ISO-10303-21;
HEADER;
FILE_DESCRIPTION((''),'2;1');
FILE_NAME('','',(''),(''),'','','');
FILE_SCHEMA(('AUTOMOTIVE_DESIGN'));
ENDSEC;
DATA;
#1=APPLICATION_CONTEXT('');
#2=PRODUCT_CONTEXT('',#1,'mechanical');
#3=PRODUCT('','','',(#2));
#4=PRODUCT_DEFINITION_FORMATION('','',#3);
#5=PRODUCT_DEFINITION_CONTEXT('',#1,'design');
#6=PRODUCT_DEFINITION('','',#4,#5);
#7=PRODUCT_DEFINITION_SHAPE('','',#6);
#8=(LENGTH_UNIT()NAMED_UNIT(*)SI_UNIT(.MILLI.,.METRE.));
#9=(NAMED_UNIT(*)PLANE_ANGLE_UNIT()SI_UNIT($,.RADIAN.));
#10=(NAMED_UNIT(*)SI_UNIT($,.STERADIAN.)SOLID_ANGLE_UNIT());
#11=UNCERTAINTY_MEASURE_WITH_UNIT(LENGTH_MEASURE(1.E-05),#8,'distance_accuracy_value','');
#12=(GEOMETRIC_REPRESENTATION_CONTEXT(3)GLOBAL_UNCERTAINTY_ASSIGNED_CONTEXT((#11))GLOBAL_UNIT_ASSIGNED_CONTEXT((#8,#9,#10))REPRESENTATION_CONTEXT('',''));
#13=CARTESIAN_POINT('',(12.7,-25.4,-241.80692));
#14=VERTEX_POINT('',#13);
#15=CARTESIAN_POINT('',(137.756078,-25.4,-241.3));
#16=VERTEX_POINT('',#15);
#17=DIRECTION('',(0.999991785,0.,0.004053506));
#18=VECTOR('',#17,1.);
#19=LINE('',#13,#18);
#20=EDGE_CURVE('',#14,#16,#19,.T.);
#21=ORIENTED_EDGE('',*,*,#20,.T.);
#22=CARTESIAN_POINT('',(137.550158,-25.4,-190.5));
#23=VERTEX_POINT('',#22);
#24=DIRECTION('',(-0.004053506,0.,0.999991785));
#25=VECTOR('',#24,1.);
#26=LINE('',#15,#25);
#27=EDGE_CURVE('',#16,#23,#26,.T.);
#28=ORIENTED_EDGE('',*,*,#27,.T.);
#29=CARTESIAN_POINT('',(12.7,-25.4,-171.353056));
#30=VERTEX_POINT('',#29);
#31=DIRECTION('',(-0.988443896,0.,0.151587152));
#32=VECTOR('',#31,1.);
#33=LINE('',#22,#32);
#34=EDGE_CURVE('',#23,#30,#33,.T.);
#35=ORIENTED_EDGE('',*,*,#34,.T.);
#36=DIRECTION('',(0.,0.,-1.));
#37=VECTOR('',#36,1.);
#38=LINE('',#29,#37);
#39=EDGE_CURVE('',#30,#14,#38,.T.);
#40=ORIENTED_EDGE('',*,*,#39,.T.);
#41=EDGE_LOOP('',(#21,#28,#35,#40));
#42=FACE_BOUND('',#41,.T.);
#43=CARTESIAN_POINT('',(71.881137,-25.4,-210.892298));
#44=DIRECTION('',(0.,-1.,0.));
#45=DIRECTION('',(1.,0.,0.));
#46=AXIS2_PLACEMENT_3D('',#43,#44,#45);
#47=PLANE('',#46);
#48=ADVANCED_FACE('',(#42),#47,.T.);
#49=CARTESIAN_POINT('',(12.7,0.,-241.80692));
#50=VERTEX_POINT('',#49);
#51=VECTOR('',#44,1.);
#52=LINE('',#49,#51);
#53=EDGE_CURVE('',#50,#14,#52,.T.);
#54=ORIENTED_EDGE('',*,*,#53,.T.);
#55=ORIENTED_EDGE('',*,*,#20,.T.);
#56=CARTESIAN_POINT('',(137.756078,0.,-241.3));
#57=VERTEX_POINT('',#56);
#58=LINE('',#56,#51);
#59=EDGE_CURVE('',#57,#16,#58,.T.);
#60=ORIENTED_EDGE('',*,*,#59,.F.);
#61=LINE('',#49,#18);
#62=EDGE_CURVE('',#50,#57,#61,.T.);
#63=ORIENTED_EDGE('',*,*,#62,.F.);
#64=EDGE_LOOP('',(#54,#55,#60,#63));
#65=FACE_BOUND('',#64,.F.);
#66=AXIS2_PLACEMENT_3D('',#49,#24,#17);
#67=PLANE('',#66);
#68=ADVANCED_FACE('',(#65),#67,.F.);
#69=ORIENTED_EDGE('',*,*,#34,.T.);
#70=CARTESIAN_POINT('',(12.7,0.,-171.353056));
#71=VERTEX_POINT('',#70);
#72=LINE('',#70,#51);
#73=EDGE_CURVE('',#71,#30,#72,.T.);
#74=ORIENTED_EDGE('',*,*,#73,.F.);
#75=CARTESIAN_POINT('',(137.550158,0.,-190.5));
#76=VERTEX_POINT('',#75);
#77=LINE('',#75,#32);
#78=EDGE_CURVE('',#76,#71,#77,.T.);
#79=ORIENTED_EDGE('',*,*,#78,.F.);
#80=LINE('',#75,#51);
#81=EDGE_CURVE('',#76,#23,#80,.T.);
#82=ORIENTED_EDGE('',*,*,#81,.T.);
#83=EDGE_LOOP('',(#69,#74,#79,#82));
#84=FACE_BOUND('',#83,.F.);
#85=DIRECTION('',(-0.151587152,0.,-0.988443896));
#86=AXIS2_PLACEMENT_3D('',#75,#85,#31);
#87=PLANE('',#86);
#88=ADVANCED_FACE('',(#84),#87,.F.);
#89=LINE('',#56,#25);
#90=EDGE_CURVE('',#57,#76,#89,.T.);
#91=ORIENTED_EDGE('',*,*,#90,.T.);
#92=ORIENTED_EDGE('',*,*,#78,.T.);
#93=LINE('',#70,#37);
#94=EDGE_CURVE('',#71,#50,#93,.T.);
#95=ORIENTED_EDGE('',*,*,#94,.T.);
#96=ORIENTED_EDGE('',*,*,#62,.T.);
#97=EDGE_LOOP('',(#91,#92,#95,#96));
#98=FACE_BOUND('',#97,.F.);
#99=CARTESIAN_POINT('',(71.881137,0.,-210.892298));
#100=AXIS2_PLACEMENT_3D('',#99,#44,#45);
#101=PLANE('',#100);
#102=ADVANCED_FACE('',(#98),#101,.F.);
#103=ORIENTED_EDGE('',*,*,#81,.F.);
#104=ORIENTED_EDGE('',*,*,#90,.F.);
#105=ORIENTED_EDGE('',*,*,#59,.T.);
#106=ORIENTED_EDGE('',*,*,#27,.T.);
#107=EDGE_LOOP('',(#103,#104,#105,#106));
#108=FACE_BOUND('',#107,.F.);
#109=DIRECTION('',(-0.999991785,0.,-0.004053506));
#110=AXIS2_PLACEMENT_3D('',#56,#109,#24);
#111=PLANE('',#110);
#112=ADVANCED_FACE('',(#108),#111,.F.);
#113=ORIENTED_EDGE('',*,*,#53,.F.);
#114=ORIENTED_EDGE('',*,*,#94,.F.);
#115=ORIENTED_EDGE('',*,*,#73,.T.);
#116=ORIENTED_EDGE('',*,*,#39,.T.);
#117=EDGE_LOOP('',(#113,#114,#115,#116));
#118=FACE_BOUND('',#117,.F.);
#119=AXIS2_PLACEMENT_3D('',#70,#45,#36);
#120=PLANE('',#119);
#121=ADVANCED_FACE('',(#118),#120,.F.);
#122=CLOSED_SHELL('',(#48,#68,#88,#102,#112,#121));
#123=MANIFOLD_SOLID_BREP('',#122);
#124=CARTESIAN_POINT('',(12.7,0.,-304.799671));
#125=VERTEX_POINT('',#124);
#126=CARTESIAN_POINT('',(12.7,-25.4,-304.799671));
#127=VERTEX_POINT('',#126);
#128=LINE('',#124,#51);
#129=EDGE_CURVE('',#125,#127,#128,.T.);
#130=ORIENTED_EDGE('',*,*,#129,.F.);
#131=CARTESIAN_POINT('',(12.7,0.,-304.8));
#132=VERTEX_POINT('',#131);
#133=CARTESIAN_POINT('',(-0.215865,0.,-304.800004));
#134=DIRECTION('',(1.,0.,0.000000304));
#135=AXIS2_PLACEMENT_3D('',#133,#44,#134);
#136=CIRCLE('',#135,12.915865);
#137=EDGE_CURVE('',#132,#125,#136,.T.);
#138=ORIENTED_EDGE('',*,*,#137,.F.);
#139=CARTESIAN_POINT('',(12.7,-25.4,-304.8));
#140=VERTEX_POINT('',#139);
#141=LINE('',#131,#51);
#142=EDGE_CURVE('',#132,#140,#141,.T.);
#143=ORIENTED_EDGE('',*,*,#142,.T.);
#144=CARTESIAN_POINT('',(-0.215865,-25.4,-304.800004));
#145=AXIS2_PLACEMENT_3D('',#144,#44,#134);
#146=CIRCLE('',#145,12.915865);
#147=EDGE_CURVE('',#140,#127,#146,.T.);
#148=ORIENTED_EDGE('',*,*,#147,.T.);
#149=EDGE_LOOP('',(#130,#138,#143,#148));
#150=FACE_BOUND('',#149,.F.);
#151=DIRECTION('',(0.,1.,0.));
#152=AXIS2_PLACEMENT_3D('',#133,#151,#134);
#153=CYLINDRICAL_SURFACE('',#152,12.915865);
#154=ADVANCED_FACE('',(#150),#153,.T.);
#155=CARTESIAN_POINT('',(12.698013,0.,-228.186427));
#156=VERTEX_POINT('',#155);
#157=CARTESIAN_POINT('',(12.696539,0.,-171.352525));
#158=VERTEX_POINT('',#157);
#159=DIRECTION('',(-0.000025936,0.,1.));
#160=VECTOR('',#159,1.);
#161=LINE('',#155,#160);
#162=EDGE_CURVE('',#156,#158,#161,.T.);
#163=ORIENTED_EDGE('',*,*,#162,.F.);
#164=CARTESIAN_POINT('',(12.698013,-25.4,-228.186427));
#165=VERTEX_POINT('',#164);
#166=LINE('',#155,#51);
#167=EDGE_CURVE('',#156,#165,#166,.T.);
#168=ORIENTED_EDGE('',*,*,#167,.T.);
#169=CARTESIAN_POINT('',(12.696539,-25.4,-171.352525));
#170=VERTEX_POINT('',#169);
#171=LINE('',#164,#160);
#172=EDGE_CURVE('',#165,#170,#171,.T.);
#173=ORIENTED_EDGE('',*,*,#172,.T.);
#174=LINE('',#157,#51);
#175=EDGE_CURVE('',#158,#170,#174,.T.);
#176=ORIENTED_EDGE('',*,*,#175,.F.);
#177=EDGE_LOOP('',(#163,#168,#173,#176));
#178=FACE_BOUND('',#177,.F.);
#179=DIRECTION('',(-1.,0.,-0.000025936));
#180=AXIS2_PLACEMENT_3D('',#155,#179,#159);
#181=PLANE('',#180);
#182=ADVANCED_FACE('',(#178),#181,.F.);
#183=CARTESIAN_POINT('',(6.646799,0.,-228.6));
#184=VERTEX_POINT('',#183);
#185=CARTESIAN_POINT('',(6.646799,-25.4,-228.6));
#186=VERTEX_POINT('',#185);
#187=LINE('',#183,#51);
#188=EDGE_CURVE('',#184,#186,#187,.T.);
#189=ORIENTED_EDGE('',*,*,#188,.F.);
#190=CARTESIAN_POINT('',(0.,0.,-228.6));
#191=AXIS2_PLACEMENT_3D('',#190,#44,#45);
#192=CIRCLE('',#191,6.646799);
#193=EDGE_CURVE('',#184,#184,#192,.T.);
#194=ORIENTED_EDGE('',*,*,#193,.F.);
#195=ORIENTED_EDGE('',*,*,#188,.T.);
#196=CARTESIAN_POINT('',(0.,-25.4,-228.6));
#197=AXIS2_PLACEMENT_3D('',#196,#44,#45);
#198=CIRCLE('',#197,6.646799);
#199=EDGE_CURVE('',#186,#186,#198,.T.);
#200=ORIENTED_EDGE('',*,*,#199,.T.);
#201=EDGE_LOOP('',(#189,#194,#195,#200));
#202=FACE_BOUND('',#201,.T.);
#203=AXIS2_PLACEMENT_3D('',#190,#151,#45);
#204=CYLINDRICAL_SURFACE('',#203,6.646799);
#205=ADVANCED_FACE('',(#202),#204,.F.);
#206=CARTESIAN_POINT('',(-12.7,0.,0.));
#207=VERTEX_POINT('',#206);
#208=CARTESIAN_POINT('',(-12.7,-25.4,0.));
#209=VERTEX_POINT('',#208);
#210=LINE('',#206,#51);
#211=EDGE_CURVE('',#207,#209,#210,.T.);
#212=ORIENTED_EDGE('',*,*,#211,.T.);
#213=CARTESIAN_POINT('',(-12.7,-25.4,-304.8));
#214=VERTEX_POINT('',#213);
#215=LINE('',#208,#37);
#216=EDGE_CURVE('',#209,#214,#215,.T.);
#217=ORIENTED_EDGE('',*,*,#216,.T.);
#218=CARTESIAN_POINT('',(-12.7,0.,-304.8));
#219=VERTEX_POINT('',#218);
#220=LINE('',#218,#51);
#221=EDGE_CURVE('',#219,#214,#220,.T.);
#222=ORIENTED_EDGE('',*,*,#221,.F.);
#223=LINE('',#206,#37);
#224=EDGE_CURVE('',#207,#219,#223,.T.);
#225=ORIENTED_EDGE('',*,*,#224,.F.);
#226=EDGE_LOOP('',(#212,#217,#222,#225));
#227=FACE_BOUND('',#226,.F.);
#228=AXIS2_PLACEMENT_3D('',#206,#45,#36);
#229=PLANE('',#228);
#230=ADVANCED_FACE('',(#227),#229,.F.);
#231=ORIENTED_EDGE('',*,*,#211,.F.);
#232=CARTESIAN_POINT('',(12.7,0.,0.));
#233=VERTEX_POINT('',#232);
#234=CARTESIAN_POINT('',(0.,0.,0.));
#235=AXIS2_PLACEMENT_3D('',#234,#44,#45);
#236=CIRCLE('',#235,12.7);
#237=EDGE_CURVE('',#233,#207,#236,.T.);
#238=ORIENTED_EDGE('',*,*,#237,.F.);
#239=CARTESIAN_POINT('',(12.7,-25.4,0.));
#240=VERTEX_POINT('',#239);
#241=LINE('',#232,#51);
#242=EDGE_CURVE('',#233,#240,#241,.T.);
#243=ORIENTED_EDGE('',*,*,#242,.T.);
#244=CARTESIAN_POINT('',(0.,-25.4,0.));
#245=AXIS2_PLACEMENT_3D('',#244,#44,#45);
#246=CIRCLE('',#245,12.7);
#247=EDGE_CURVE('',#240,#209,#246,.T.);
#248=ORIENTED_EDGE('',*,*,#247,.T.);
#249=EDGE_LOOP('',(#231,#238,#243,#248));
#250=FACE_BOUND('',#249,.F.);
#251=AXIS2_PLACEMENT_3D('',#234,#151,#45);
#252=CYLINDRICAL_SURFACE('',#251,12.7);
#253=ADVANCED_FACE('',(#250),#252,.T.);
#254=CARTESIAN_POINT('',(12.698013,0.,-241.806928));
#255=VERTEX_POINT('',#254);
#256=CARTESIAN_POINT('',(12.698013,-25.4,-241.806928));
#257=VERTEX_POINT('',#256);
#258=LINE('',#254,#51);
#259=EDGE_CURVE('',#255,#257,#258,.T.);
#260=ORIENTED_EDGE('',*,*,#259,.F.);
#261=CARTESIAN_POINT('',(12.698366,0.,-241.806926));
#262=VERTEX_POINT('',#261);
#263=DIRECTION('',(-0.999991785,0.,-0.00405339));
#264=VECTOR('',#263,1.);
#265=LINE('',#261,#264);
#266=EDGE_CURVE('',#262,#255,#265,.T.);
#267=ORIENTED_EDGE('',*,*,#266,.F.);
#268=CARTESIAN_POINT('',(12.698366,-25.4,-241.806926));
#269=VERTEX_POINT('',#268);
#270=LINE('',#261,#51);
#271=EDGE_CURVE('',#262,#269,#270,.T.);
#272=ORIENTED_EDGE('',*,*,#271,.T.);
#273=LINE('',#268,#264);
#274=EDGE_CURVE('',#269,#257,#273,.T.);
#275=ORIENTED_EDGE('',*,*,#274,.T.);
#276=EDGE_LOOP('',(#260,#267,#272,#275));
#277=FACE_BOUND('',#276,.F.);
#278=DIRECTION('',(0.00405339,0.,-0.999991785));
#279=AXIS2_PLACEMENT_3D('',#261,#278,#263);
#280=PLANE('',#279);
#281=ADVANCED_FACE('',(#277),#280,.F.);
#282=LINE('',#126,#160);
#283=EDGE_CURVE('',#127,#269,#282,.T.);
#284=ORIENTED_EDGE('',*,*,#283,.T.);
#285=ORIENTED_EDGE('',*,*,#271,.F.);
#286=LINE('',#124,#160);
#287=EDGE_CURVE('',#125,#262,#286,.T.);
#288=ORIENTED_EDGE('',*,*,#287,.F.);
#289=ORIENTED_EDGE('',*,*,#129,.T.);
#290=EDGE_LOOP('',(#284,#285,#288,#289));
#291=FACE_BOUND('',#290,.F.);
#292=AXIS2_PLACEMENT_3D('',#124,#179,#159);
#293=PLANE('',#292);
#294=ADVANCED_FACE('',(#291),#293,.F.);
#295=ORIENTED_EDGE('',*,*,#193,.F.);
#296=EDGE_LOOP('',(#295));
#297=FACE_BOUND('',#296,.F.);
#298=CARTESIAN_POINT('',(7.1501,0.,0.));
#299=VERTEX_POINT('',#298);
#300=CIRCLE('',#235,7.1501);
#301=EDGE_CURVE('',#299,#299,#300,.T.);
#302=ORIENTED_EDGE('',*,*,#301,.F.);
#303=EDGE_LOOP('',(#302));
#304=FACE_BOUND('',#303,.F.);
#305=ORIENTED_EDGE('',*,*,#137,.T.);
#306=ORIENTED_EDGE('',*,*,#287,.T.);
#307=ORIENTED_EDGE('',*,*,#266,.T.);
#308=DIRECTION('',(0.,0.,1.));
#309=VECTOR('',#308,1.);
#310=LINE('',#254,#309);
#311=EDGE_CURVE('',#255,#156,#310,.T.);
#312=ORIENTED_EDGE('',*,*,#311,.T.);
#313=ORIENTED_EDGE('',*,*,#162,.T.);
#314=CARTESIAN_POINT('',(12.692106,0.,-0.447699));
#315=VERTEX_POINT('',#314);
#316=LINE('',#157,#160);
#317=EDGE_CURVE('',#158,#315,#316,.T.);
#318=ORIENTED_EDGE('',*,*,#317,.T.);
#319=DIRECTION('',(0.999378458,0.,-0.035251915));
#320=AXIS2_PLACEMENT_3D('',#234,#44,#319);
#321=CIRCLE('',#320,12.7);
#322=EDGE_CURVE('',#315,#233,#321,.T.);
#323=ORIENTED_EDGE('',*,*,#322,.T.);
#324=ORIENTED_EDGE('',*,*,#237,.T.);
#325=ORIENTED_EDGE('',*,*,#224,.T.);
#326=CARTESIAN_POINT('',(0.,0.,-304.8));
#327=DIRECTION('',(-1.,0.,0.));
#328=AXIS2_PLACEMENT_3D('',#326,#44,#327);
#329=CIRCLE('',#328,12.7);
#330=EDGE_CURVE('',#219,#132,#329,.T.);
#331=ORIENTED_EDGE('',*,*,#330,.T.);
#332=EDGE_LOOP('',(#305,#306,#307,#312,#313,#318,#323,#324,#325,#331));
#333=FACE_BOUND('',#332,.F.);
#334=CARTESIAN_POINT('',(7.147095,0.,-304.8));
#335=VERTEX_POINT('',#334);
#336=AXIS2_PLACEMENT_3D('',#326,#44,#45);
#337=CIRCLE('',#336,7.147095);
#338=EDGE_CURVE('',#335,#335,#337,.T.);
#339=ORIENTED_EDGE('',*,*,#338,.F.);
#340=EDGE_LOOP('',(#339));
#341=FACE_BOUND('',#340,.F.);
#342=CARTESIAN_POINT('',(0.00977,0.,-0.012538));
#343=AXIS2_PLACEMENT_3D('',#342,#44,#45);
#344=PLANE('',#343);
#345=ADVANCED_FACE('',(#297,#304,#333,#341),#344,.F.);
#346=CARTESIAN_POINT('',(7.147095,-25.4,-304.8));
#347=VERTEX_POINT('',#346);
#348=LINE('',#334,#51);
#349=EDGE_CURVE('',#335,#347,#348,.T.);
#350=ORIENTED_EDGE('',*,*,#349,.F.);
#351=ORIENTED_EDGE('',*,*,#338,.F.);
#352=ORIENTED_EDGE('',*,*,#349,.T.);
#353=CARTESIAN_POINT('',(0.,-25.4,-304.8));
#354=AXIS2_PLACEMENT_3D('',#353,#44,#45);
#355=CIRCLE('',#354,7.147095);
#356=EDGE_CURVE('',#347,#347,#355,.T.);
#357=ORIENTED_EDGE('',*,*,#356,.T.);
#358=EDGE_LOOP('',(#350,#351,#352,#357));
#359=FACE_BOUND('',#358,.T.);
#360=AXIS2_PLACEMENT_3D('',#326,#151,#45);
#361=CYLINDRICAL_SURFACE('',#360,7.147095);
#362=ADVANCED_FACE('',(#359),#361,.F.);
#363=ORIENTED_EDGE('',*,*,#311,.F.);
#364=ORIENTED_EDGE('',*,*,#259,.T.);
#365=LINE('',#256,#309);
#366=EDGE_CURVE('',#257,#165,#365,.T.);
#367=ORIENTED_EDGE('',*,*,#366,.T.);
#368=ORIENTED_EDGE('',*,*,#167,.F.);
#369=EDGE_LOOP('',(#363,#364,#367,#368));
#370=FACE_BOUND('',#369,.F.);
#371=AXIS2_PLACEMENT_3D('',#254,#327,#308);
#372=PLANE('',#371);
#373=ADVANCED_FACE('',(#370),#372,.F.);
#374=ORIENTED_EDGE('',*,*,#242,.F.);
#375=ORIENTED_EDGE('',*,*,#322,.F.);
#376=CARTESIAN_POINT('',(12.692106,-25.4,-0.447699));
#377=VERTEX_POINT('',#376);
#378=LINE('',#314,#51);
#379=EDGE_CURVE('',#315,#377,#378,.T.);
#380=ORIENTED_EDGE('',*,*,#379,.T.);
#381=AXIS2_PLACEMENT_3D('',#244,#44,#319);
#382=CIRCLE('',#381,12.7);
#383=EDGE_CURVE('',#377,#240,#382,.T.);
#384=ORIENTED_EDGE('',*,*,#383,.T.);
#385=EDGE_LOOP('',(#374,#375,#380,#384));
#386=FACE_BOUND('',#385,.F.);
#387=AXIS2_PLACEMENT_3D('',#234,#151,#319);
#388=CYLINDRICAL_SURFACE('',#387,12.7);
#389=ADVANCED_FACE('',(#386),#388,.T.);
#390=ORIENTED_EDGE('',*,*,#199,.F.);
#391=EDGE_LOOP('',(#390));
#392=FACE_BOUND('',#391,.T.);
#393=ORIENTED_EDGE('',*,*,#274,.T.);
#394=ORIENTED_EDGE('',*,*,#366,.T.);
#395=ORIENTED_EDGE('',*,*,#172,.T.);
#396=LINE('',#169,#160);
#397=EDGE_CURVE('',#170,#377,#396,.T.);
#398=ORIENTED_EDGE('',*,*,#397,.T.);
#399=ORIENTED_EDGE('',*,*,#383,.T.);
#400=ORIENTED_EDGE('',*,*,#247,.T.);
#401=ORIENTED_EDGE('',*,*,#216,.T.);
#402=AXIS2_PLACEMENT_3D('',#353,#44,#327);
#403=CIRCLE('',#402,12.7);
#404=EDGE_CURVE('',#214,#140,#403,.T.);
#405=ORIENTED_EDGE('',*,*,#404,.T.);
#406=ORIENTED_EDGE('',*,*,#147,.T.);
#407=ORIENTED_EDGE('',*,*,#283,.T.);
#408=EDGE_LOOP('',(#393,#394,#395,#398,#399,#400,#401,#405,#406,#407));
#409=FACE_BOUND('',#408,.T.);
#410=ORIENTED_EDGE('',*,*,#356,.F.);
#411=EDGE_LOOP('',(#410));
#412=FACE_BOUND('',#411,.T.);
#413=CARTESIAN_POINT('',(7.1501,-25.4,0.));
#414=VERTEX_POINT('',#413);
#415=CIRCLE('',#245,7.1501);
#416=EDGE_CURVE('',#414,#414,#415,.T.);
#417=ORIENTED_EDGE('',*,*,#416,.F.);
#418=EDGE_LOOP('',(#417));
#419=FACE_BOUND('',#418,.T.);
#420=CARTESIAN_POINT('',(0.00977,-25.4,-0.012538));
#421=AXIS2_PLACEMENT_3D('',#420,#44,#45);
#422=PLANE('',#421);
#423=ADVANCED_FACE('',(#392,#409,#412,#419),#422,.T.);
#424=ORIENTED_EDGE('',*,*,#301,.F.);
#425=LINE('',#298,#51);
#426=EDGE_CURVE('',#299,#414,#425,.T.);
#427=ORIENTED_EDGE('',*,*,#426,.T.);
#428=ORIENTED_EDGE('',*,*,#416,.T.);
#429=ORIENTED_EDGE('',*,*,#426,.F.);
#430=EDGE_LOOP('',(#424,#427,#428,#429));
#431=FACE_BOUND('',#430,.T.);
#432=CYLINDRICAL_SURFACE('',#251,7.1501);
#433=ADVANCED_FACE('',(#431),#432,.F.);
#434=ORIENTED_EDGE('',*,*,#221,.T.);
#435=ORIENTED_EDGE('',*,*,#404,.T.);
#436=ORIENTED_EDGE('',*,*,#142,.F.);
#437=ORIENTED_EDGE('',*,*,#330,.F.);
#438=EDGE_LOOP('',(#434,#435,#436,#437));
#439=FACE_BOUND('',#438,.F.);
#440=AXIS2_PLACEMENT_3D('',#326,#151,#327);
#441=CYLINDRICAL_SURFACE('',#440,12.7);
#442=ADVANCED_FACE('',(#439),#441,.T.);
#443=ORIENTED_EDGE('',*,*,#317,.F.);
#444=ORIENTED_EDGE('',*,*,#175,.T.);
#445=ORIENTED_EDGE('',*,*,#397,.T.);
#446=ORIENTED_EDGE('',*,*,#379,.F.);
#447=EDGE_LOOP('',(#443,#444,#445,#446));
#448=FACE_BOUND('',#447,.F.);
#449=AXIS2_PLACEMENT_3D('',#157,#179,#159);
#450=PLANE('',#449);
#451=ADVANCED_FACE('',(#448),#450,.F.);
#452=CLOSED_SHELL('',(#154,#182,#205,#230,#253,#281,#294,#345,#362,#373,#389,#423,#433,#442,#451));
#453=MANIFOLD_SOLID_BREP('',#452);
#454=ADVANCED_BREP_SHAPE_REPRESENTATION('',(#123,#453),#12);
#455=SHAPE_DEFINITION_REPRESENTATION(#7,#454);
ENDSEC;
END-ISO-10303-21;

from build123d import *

# Parameters (mm, degrees)
F0_R     = 7.1501
F0_R_2   = 6.646798642
F0_R_3   = 7.1470953858
F1_DEPTH = 25.4


# Not quite as in the source:
# - a feature names something its author has since deleted; it is built from what else it names


with BuildPart() as f1:
    # F0 (on Front) → F1 (new body)
    with BuildSketch(Plane.XZ):
        with BuildLine():
            ThreePointArc((12.692106418, -0.4476993117), (12.6980264512, -0.223884447), (12.7, 0))
            ThreePointArc((12.7, 0), (0, 12.7), (-12.7, 0))
            ThreePointArc((-12.7, 0), (-0.223884447, -12.6980264512), (12.692106418, -0.4476993117))
        make_face()
        Circle(F0_R, mode=Mode.SUBTRACT)
        with BuildLine():
            ThreePointArc((12.692106418, -0.4476993117), (-0.223884447, -12.6980264512), (-12.7, 0))
            Line((-12.7, 0), (-12.7, -304.8))
            ThreePointArc((-12.7, -304.8), (-0.0001646916, -292.1000000011), (12.6999999957, -304.7996706168))
            Line((12.6999999957, -304.7996706168), (12.6983662356, -241.8069263698))
            Line((12.6983662356, -241.8069263698), (12.6980129786, -241.8069278017))
            Line((12.6980129786, -241.8069278017), (12.6980129786, -228.1864268658))
            Line((12.6980129786, -228.1864268658), (12.6965389522, -171.3525252163))
            Line((12.6965389522, -171.3525252163), (12.692106418, -0.4476993117))
        make_face()
        with Locations((0, -228.6)):
            Circle(F0_R_2, mode=Mode.SUBTRACT)
        with BuildLine():
            ThreePointArc((12.6999999957, -304.7996706168), (-0.0001646916, -292.1000000011), (-12.7, -304.8))
            ThreePointArc((-12.7, -304.8), (0, -317.5), (12.7, -304.8))
            ThreePointArc((12.7, -304.8), (12.6999999989, -304.7998353084), (12.6999999957, -304.7996706168))
        make_face()
        with Locations((0, -304.8)):
            Circle(F0_R_3, mode=Mode.SUBTRACT)
    extrude(amount=F1_DEPTH)


with BuildPart() as f1b:
    # F0 (on Front) → F1, piece 2 (new body)
    with BuildSketch(Plane.XZ):
        Polygon((137.5501584362, -190.5), (12.7, -171.3530560005), (12.7, -241.8069197473), (137.7560782405, -241.3), align=None)
    extrude(amount=F1_DEPTH)


solid = Compound([f1.part, f1b.part])
